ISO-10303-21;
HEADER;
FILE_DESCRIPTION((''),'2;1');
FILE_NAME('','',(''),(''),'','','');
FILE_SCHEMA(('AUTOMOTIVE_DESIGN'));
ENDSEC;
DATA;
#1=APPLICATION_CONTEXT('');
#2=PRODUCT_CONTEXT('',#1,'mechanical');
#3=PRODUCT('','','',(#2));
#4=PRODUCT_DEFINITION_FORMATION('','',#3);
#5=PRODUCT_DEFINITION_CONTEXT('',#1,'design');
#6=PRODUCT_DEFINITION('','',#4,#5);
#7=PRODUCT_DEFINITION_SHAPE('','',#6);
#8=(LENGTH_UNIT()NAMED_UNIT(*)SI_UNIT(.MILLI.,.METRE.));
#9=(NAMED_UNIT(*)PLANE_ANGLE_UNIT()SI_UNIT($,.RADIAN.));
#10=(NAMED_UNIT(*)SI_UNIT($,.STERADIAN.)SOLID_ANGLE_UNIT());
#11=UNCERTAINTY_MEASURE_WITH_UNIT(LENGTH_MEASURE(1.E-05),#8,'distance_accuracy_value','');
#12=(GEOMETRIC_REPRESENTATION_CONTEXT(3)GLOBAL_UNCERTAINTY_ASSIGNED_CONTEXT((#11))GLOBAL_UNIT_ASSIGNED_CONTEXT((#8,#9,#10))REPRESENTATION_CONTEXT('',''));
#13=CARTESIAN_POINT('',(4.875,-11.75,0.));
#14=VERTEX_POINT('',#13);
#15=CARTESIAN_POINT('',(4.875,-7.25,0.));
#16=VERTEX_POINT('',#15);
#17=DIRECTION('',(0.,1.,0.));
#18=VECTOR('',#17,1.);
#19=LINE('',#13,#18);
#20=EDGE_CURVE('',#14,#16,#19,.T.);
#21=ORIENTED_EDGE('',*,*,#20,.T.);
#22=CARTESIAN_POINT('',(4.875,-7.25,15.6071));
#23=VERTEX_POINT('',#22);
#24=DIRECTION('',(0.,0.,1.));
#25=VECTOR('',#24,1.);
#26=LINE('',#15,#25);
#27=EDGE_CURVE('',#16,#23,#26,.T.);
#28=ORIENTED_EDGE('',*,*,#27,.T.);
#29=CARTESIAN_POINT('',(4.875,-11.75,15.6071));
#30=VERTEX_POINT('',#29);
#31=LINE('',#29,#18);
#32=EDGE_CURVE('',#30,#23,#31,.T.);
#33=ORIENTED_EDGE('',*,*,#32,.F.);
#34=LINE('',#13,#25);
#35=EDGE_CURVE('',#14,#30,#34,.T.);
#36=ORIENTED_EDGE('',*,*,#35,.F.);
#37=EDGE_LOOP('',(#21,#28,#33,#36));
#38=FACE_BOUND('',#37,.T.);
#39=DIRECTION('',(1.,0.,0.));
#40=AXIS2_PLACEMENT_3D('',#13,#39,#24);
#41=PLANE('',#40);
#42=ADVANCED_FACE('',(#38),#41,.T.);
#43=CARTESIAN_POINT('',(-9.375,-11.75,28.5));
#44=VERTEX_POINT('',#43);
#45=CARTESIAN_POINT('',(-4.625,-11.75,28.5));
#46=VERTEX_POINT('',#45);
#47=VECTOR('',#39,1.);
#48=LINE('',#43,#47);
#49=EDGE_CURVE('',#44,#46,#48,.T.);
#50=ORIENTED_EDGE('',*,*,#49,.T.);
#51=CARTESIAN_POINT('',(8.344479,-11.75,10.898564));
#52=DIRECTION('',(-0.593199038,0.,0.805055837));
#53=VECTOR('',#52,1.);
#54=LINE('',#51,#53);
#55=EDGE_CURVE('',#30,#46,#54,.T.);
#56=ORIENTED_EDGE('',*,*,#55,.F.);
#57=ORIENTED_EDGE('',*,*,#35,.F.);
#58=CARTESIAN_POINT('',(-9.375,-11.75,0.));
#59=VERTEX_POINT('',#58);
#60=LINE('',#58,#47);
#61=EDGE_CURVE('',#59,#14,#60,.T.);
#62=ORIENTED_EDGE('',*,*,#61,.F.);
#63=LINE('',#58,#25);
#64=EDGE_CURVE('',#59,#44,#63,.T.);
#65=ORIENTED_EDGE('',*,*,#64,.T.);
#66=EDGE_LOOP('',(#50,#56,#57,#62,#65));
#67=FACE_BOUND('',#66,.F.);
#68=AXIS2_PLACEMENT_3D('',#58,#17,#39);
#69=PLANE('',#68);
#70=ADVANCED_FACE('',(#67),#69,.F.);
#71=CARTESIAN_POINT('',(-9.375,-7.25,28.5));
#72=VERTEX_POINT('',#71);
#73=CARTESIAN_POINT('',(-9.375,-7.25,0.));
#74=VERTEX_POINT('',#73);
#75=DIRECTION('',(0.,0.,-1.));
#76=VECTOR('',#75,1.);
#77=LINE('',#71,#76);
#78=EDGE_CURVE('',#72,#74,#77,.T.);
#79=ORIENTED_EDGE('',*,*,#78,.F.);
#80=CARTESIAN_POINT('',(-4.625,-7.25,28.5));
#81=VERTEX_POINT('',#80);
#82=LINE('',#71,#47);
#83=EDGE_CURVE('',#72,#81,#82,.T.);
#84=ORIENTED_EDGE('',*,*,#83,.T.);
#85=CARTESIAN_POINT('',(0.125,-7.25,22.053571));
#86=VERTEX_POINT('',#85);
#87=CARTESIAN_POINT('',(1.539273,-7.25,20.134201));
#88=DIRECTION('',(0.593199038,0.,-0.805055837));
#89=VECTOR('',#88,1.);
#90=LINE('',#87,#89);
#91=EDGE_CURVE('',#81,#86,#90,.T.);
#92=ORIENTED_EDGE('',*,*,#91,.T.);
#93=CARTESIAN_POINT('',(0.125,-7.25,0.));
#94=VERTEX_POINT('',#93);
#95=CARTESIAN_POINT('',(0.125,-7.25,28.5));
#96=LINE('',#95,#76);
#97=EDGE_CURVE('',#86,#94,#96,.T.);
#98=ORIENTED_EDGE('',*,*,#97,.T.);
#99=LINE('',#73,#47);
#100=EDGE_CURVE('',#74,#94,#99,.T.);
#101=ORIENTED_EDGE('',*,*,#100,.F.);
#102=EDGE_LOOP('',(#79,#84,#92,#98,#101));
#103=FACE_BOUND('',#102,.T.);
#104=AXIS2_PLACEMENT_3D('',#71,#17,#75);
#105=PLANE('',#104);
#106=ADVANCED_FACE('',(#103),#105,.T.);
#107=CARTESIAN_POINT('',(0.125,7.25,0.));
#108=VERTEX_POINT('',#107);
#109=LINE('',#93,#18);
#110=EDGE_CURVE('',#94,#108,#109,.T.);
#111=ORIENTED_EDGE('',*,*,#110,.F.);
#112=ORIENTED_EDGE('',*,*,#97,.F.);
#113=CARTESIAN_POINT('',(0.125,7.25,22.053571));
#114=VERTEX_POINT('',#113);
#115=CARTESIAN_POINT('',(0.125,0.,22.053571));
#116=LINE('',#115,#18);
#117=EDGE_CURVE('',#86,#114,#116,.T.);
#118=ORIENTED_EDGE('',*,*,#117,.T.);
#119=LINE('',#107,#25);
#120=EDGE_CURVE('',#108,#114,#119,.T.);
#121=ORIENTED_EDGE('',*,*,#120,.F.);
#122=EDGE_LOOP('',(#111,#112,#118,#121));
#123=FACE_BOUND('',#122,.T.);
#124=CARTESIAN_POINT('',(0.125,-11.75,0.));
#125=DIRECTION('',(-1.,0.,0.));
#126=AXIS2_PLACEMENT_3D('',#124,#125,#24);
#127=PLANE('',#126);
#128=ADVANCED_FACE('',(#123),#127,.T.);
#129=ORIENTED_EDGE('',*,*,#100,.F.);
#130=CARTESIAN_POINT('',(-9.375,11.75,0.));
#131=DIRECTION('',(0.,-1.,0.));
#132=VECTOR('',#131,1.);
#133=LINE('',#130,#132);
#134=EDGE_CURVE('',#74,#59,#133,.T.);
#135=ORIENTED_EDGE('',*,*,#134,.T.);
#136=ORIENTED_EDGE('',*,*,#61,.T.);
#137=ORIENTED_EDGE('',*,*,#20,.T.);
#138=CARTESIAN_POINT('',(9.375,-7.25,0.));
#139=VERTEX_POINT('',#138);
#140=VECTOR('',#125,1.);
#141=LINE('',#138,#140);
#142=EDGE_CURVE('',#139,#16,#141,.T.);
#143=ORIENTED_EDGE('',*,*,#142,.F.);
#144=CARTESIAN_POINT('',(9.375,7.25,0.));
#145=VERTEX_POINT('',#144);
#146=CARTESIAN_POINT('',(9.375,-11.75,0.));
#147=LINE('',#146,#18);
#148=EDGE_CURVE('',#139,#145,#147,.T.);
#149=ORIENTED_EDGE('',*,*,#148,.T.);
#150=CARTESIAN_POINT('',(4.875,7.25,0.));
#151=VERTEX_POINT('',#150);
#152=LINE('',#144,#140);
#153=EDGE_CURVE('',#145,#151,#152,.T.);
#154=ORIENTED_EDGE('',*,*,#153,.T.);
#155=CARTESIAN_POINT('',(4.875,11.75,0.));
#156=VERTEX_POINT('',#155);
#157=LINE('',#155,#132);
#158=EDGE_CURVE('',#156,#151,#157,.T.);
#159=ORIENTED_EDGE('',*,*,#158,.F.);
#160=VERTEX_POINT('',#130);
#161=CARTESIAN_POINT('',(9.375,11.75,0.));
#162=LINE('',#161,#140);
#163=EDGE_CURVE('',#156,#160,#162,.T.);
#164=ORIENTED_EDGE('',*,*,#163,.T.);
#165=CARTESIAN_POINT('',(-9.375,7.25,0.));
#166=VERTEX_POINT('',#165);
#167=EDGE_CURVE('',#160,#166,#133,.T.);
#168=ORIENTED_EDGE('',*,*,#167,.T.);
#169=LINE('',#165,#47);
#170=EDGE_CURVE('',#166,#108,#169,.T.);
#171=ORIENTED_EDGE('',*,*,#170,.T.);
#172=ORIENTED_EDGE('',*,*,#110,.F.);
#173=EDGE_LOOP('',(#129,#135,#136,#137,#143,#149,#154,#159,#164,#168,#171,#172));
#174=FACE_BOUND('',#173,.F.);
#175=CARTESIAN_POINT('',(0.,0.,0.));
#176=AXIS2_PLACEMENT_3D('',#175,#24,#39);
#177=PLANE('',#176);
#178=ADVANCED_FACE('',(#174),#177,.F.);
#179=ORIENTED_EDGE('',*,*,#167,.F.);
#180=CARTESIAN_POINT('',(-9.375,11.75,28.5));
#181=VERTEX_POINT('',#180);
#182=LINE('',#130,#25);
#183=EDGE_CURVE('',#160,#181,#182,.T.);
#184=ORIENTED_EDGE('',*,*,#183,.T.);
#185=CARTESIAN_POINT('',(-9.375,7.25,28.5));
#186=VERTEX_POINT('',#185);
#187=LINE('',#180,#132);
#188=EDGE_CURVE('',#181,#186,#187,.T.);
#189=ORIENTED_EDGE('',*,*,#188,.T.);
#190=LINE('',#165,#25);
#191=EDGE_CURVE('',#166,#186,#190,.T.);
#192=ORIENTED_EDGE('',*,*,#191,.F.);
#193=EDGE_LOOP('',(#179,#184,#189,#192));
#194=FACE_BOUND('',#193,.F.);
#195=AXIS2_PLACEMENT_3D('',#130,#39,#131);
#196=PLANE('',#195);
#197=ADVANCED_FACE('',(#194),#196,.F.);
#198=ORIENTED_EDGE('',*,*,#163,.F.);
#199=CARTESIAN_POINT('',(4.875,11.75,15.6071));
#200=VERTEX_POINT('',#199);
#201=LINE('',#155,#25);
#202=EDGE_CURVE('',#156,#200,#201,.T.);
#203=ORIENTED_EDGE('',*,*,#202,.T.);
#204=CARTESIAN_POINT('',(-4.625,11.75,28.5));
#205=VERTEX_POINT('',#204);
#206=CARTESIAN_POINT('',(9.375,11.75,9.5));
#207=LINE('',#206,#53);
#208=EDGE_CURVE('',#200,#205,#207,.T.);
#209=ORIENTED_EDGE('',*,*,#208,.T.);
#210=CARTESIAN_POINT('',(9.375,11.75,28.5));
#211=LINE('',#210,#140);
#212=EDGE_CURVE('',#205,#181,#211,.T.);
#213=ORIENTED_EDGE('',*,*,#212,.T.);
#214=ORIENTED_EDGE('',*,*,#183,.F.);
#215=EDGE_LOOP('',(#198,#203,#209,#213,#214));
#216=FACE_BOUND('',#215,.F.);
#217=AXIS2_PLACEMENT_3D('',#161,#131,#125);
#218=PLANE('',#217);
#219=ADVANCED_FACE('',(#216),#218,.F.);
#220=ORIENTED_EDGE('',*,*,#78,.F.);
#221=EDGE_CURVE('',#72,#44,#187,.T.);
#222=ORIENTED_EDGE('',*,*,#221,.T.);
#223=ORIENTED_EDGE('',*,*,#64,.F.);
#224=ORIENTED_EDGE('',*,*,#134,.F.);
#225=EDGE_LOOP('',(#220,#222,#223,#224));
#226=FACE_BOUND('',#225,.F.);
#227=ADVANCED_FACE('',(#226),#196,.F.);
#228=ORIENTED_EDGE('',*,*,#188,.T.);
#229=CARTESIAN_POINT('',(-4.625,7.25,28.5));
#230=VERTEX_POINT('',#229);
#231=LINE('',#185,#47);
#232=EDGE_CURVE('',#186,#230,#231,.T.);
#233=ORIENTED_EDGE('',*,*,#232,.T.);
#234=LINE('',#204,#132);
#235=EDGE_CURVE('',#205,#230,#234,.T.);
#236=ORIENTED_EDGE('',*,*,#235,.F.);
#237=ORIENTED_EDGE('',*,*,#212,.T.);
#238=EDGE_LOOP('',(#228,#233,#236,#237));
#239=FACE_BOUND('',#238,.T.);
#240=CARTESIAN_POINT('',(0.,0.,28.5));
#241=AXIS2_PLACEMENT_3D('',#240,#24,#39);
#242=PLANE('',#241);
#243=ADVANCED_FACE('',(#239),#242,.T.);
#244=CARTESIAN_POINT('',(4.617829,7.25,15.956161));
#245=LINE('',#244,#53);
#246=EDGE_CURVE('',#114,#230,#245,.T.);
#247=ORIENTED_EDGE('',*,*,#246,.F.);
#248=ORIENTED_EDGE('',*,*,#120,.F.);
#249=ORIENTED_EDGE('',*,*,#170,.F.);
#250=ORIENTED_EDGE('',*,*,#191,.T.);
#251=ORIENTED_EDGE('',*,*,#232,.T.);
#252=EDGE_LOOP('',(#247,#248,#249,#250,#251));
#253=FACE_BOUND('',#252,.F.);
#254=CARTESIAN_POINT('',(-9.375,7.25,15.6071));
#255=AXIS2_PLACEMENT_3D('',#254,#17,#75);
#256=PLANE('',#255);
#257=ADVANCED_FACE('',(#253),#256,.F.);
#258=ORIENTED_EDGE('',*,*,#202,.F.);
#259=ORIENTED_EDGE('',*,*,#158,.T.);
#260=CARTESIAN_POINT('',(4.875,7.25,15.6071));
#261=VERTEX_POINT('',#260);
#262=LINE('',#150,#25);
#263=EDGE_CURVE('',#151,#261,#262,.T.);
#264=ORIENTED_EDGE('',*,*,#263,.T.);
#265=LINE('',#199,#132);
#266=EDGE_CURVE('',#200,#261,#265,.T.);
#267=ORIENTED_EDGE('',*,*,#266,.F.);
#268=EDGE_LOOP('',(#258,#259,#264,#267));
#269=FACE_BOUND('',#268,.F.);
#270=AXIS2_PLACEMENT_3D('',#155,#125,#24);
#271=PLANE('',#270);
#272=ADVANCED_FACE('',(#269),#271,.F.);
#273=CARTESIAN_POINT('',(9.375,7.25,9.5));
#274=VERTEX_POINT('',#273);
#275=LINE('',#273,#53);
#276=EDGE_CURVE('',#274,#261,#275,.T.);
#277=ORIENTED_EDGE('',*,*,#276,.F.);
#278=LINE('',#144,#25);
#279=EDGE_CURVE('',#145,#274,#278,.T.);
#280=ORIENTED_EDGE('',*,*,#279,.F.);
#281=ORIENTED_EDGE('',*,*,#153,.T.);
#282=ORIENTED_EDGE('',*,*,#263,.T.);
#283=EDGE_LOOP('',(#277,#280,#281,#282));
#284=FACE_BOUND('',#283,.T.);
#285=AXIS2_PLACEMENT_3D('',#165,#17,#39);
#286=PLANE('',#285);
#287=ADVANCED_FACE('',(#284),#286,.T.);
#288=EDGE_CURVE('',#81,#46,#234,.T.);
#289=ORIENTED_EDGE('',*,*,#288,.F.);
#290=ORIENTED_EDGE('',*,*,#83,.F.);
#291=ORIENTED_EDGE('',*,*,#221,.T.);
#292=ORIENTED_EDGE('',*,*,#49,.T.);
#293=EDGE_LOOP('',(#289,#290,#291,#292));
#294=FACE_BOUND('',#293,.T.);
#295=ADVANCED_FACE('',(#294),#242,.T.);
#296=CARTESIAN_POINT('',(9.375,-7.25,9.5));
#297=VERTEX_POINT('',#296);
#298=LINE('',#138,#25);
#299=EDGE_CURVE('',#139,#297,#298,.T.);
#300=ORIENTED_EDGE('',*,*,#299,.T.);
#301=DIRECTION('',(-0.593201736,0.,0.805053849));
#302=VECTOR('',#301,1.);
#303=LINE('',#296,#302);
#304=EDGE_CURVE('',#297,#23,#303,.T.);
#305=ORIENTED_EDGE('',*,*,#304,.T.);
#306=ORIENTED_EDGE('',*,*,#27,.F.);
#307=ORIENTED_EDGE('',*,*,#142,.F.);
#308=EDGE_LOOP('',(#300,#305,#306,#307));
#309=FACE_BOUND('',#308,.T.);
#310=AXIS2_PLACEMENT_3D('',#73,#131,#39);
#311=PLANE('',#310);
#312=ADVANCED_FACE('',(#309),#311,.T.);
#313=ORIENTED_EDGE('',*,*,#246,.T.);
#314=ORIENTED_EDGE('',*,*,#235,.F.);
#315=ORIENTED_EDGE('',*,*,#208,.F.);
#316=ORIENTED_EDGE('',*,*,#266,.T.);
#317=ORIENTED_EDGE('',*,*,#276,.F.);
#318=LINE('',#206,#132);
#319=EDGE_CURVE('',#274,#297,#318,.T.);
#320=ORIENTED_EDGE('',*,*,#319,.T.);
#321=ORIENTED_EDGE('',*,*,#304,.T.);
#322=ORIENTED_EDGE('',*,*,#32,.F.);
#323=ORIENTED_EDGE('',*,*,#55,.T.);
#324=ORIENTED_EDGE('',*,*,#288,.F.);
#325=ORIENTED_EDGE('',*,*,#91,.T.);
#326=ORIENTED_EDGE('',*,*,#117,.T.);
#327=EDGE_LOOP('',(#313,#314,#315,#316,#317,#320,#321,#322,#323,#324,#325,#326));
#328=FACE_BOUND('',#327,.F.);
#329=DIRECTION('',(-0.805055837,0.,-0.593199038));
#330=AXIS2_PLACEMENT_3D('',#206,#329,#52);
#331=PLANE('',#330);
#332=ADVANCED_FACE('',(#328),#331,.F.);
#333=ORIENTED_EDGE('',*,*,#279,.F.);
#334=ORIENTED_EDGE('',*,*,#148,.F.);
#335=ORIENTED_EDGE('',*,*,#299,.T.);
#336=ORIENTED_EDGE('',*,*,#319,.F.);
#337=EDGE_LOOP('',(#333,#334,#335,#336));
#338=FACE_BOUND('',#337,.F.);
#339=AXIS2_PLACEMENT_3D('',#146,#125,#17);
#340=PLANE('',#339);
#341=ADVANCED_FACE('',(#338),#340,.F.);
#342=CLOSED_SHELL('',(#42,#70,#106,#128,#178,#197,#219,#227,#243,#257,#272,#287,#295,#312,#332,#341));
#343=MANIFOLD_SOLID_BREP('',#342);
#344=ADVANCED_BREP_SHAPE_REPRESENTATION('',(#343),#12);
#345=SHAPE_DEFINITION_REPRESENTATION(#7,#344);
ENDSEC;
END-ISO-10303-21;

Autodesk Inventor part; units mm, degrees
ref_plane "YZ Plane" through (0, 0, 0) normal (1, 0, 0) x (0, 1, 0)
ref_plane "XZ Plane" through (0, 0, 0) normal (0, 1, 0) x (-1, 0, 0)
ref_plane "XY Plane" through (0, 0, 0) normal (0, 0, 1) x (1, 0, 0)
sketch "Sketch1" plane through (0, 0, 0) normal (0, 0, 1) x (1, 0, 0)
  line L0 (-9.375, -11.75) -> (9.375, -11.75)
  line L1 (9.375, -11.75) -> (9.375, 11.75)
  line L2 (9.375, 11.75) -> (-9.375, 11.75)
  line L3 (-9.375, 11.75) -> (-9.375, -11.75)
  line L4 (-9.375, -11.75) -> (9.375, 11.75) construction
  line L5 (9.375, -11.75) -> (-9.375, 11.75) construction
  point P0 (0, 0)
  dimension "d0" = 18.75
  dimension "d1" = 23.5
extrude "Extrusion1" add sketch "Sketch1" along normal blind 28.5
sketch "Sketch2" plane through (-9.375, 11.75, 0) normal (0, 1, 0) x (1, 0, 0)
  line L0 (0, -28.5) -> (18.75, -28.5) projected
  line L1 (0, -28.5) -> (4.75, -28.5)
  line L2 (18.75, 0) -> (18.75, -9.5)
  line L3 (18.75, 0) -> (18.75, -28.5) projected
  line L4 (18.75, -9.5) -> (4.75, -28.5)
  line L5 (18.75, -28.5) -> (4.75, -28.5)
  line L6 (18.75, -28.5) -> (18.75, -9.5)
  point P0 (9.375, 0)
  dimension "d4" = 4.75
  dimension "d5" = 9.5
extrude "Extrusion2" cut sketch "Sketch2" against normal blind 28.5
sketch "Sketch7" plane through (-9.375, 11.75, 0) normal (0, 1, 0) x (1, 0, 0)
  line L0 (18.75, 0) -> (18.75, -9.5) projected
  line L1 (18.75, -9.5) -> (18.75, 0)
  line L2 (18.75, 0) -> (14.25, 0)
  line L3 (0, 0) -> (18.75, 0) projected
  line L4 (14.25, 0) -> (14.25, -15.6071)
  line L5 (18.75, -9.5) -> (4.75, -28.5) projected
  line L6 (18.75, -9.5) -> (14.25, -15.6071)
  point P0 (9.375, 0)
  dimension "d27" = 4.5
extrude "Extrusion7" cut sketch "Sketch7" against normal blind 4.5
sketch "Sketch8" plane through (-9.375, -11.75, 0) normal (0, -1, 0) x (1, 0, 0)
  line L0 (18.75, 0) -> (18.75, 9.5) projected
  line L1 (18.75, 0) -> (14.25, 0)
  line L2 (0, 0) -> (18.75, 0) projected
  line L3 (18.75, 9.5) -> (14.25, 15.6071) projected
  line L4 (14.25, 0) -> (14.25, 15.6071)
  line L5 (14.25, 15.6071) -> (18.75, 9.5)
  line L6 (18.75, 0) -> (18.75, 9.5)
  point P0 (9.375, 0)
  dimension "d30" = 4.5
extrude "Extrusion8" cut sketch "Sketch8" against normal blind 4.5
sketch "Sketch9" plane through (-9.375, -11.75, 0) normal (-1, 0, 0) x (0, 0, 1)
  line L0 (15.6071, 19) -> (0, 19) projected
  line L1 (28.5, 4.5) -> (0, 4.5)
  line L2 (0, 4.5) -> (0, 19)
  line L3 (0, 19) -> (28.5, 19)
  line L4 (28.5, 19) -> (28.5, 4.5)
  line L5 (28.5, 23.5) -> (28.5, 0) projected
  line L6 (0, 0) -> (28.5, 0) projected
  point P0 (0, 11.75)
  dimension "d35" = 0
  dimension "d36" = 4.5
extrude "Extrusion9" cut sketch "Sketch9" against normal blind 9.5
